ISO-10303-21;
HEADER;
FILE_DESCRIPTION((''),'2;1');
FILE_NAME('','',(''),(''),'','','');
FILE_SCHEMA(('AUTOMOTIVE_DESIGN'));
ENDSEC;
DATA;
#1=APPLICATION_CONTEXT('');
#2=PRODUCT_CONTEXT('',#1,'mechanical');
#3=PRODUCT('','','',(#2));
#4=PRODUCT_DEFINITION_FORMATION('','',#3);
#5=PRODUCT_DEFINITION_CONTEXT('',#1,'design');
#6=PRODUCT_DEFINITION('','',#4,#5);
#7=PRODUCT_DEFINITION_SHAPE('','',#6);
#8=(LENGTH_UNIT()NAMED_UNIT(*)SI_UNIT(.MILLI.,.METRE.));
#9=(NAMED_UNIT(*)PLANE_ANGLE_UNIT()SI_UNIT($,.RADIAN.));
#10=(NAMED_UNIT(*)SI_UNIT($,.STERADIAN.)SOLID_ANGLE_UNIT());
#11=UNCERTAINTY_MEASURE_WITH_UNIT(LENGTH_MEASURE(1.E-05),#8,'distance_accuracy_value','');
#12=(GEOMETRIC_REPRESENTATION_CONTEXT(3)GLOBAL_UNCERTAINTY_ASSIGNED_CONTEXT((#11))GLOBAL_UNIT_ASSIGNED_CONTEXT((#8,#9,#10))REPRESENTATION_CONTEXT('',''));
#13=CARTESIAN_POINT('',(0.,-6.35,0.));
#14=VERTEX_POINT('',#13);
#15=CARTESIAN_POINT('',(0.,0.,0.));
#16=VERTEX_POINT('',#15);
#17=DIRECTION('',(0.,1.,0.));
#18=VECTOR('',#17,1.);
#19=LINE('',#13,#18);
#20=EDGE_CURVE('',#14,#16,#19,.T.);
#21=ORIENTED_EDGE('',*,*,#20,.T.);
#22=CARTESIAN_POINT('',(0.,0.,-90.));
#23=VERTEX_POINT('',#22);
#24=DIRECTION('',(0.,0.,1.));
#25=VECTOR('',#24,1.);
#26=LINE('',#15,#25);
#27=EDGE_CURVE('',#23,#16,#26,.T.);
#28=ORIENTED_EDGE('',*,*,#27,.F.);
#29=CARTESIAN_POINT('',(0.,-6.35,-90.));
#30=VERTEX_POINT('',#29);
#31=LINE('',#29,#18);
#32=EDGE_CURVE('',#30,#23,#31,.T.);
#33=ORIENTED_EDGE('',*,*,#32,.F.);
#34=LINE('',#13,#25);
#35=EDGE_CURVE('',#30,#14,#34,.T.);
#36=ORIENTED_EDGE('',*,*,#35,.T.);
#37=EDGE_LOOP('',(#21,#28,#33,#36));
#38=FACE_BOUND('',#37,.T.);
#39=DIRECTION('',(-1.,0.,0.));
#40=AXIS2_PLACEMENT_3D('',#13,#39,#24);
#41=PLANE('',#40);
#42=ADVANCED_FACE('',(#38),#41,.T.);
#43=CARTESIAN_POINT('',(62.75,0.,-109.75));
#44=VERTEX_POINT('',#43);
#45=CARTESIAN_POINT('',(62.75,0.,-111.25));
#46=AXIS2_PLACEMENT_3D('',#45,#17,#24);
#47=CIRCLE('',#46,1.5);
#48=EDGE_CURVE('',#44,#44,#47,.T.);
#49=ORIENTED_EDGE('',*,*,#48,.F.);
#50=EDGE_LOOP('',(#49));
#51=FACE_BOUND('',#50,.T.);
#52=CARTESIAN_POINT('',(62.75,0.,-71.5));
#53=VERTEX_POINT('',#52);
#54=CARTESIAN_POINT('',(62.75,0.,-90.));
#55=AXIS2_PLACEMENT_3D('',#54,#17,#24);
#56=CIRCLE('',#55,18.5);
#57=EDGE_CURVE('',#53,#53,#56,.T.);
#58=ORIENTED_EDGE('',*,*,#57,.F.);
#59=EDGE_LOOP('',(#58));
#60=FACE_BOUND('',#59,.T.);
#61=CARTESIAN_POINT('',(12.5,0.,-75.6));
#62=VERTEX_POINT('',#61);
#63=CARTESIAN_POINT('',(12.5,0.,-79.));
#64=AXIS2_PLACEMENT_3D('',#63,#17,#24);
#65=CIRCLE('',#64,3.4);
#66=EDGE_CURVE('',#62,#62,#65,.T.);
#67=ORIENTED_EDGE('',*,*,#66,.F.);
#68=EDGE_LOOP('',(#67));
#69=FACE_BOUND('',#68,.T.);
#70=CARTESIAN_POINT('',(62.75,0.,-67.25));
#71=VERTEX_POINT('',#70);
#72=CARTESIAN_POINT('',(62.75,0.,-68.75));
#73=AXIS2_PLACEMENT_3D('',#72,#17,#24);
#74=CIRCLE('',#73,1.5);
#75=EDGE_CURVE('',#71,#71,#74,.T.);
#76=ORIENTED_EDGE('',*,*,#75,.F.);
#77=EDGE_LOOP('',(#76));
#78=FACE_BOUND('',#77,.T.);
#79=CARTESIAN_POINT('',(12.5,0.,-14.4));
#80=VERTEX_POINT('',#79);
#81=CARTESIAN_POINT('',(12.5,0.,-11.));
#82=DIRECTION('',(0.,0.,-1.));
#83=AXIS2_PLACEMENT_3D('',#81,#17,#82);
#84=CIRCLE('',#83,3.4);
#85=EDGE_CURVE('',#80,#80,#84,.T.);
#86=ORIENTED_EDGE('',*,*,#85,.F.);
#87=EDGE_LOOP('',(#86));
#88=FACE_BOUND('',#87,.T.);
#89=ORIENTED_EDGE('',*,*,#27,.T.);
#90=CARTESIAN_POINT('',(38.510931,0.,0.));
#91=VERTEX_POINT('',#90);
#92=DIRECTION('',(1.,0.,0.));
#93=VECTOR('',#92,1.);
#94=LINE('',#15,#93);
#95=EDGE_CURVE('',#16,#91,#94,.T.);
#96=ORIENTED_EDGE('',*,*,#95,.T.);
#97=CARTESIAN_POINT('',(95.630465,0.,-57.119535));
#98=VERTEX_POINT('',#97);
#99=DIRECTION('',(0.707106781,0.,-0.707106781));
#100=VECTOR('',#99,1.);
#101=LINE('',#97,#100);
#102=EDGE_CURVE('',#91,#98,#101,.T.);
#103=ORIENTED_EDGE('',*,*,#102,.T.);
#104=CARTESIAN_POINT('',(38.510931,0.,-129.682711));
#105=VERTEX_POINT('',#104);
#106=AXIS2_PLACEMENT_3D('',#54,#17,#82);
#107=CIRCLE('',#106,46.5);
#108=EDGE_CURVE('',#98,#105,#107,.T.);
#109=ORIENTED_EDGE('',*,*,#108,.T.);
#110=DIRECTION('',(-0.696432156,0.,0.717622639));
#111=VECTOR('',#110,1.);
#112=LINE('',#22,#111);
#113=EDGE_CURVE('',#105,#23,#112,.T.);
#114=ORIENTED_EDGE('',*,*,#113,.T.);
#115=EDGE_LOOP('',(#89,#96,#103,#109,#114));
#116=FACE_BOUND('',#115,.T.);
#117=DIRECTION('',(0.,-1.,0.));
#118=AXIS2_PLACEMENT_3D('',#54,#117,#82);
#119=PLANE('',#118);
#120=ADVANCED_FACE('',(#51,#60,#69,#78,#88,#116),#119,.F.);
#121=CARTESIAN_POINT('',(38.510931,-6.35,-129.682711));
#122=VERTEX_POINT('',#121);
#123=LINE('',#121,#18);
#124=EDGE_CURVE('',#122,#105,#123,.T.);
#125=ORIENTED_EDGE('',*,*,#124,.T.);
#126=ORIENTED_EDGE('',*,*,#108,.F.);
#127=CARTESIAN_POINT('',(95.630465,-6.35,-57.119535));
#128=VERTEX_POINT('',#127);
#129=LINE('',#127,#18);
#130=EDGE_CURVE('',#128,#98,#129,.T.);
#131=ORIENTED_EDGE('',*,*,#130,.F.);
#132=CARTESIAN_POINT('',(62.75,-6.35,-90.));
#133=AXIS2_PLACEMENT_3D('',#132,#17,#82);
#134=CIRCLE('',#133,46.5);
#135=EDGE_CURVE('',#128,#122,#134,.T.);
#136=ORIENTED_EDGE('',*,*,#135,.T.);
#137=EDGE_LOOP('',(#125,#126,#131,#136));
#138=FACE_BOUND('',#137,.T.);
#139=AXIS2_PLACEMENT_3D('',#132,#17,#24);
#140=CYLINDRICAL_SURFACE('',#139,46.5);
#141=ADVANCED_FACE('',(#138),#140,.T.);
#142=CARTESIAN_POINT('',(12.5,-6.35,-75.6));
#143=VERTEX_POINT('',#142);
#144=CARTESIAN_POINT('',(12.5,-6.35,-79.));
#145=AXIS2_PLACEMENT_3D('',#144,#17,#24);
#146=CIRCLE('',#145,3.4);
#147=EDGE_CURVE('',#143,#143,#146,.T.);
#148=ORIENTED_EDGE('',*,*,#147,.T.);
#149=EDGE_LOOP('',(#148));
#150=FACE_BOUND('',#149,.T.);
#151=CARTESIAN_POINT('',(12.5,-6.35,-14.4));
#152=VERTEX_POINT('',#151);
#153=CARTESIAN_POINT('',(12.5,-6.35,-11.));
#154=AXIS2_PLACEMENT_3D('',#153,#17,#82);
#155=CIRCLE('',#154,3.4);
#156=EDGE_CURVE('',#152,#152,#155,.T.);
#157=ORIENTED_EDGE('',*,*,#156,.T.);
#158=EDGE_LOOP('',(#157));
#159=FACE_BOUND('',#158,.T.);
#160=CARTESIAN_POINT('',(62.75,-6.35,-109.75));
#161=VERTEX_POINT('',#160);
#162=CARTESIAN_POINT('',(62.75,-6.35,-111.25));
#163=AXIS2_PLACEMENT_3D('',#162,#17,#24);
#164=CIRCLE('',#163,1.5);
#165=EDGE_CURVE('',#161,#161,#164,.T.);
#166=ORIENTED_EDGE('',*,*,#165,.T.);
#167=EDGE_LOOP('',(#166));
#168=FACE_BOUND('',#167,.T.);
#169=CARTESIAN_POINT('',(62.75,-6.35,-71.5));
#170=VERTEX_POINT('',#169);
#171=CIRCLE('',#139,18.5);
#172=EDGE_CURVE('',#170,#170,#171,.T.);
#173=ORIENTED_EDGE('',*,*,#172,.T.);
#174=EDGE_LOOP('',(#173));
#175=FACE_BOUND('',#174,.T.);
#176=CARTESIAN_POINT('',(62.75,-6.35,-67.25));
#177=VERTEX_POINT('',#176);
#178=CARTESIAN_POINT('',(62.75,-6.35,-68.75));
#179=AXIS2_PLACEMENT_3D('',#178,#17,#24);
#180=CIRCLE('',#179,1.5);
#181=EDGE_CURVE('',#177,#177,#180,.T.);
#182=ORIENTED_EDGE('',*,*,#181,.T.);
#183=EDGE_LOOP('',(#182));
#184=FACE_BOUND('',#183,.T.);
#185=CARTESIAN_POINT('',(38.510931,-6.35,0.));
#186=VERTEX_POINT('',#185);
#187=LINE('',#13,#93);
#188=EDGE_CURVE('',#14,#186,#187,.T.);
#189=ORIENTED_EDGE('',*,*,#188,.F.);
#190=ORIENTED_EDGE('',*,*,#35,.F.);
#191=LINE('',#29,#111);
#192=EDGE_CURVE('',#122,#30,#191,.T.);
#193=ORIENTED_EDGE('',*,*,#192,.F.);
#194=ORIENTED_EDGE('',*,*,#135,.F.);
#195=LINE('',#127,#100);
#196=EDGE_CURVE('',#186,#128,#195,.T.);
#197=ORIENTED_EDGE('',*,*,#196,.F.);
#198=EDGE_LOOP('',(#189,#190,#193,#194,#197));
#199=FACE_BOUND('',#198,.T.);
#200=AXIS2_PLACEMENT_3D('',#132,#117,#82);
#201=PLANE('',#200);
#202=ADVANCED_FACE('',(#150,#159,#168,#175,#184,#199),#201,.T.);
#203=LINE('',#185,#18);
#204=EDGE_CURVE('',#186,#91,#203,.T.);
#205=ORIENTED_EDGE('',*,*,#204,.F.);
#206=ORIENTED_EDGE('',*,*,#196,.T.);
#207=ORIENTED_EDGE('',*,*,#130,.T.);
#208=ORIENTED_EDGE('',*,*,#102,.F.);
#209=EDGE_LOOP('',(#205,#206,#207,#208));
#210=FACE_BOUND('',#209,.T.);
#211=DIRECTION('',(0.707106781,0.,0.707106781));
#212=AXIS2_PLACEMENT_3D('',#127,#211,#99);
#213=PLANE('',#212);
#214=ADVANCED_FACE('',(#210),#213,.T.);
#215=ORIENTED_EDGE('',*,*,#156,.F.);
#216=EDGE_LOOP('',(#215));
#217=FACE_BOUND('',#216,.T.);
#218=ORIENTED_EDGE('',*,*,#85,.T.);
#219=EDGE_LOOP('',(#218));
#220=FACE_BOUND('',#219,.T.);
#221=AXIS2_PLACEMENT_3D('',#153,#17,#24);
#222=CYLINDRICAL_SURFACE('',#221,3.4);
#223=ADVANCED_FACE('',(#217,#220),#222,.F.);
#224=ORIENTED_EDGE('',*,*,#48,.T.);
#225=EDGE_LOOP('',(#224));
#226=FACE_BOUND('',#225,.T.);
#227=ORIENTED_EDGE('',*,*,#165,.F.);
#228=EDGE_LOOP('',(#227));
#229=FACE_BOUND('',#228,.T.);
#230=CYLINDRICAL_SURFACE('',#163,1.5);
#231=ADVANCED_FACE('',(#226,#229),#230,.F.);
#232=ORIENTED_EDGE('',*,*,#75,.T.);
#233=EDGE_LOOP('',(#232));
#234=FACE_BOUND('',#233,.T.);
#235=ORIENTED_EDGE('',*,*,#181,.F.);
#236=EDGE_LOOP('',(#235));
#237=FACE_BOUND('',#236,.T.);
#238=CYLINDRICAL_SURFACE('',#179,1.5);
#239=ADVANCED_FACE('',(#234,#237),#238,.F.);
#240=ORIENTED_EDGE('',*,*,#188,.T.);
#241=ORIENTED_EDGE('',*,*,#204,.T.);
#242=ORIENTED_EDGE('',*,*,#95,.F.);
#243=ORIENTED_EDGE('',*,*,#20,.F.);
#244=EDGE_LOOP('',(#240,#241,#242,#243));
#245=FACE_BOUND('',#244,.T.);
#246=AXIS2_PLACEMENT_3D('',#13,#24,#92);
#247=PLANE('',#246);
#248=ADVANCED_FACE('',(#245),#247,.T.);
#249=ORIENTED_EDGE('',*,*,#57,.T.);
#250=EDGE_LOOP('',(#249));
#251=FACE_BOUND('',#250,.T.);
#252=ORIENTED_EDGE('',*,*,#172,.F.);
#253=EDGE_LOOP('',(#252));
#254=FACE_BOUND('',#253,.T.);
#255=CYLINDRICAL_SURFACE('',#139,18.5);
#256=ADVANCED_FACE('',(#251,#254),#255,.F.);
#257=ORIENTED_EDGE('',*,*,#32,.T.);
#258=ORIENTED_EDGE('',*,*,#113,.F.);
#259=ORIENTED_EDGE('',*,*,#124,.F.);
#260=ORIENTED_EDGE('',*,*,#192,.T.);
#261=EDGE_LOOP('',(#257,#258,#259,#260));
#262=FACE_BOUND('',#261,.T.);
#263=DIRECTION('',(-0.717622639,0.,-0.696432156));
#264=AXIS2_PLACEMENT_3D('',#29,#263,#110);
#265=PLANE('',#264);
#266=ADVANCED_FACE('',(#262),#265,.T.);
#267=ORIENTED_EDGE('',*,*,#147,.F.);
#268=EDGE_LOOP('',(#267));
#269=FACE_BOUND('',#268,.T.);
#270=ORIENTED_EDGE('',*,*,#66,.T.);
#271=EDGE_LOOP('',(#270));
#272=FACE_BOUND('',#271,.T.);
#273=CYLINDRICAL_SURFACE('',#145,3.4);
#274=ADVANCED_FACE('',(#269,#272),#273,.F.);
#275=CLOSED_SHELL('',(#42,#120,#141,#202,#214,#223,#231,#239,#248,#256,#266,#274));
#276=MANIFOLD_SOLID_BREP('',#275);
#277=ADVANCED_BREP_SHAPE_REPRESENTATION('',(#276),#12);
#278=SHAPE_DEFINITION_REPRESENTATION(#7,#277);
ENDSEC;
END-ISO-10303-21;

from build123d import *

# Parameters (mm, degrees)
BASE_FLANGE1_DEPTH = 6.35
SKETCH8_R          = 3.4
CUT_EXTRUDE1_DEPTH = 175.95180765
SKETCH9_R          = 18.5
CUT_EXTRUDE2_DEPTH = 175.95180765
SKETCH10_R         = 1.5
CUT_EXTRUDE3_DEPTH = 175.95180765


# Sheet-metal steps are written as plain solids
with BuildPart() as part:
    # Sketch2 → Base-Flange1 (new body)
    with BuildSketch(Plane(origin=(0, 0, 0), x_dir=(1, 0, 0), z_dir=(0, 1, 0))):
        with BuildLine():
            Line((0, 0), (38.51093065, 0))
            Line((38.51093065, 0), (95.630465325, 57.119534675))
            ThreePointArc((95.630465325, 57.119534675), (99.287953618, 118.761570635), (38.51093065, 129.682710556))
            Line((38.51093065, 129.682710556), (0, 90))
            Line((0, 90), (0, 0))
        make_face()
    extrude(amount=-BASE_FLANGE1_DEPTH)

    # Sketch8 → Cut-Extrude1 (cut, through all)
    with BuildSketch(Plane(origin=(0, 0, 0), x_dir=(1, 0, 0), z_dir=(0, 1, 0))):
        with Locations(Location((12.5, 79, 0), (0, 0, 270))):
            Circle(SKETCH8_R)
        with Locations(Location((12.5, 11, 0), (0, 0, 90))):
            Circle(SKETCH8_R)
    extrude(amount=-CUT_EXTRUDE1_DEPTH, mode=Mode.SUBTRACT)

    # Sketch9 → Cut-Extrude2 (cut, through all)
    with BuildSketch(Plane(origin=(0, 0, 0), x_dir=(1, 0, 0), z_dir=(0, 1, 0))):
        with Locations(Location((62.75, 90, 0), (0, 0, 270))):
            Circle(SKETCH9_R)
    extrude(amount=-CUT_EXTRUDE2_DEPTH, mode=Mode.SUBTRACT)

    # Sketch10 → Cut-Extrude3 (cut, through all)
    with BuildSketch(Plane(origin=(0, 0, 0), x_dir=(1, 0, 0), z_dir=(0, 1, 0))):
        with Locations(Location((62.75, 111.25, 0), (0, 0, 270))):
            Circle(SKETCH10_R)
        with Locations(Location((62.75, 68.75, 0), (0, 0, 270))):
            Circle(SKETCH10_R)
    extrude(amount=-CUT_EXTRUDE3_DEPTH, mode=Mode.SUBTRACT)


solid = part.part
